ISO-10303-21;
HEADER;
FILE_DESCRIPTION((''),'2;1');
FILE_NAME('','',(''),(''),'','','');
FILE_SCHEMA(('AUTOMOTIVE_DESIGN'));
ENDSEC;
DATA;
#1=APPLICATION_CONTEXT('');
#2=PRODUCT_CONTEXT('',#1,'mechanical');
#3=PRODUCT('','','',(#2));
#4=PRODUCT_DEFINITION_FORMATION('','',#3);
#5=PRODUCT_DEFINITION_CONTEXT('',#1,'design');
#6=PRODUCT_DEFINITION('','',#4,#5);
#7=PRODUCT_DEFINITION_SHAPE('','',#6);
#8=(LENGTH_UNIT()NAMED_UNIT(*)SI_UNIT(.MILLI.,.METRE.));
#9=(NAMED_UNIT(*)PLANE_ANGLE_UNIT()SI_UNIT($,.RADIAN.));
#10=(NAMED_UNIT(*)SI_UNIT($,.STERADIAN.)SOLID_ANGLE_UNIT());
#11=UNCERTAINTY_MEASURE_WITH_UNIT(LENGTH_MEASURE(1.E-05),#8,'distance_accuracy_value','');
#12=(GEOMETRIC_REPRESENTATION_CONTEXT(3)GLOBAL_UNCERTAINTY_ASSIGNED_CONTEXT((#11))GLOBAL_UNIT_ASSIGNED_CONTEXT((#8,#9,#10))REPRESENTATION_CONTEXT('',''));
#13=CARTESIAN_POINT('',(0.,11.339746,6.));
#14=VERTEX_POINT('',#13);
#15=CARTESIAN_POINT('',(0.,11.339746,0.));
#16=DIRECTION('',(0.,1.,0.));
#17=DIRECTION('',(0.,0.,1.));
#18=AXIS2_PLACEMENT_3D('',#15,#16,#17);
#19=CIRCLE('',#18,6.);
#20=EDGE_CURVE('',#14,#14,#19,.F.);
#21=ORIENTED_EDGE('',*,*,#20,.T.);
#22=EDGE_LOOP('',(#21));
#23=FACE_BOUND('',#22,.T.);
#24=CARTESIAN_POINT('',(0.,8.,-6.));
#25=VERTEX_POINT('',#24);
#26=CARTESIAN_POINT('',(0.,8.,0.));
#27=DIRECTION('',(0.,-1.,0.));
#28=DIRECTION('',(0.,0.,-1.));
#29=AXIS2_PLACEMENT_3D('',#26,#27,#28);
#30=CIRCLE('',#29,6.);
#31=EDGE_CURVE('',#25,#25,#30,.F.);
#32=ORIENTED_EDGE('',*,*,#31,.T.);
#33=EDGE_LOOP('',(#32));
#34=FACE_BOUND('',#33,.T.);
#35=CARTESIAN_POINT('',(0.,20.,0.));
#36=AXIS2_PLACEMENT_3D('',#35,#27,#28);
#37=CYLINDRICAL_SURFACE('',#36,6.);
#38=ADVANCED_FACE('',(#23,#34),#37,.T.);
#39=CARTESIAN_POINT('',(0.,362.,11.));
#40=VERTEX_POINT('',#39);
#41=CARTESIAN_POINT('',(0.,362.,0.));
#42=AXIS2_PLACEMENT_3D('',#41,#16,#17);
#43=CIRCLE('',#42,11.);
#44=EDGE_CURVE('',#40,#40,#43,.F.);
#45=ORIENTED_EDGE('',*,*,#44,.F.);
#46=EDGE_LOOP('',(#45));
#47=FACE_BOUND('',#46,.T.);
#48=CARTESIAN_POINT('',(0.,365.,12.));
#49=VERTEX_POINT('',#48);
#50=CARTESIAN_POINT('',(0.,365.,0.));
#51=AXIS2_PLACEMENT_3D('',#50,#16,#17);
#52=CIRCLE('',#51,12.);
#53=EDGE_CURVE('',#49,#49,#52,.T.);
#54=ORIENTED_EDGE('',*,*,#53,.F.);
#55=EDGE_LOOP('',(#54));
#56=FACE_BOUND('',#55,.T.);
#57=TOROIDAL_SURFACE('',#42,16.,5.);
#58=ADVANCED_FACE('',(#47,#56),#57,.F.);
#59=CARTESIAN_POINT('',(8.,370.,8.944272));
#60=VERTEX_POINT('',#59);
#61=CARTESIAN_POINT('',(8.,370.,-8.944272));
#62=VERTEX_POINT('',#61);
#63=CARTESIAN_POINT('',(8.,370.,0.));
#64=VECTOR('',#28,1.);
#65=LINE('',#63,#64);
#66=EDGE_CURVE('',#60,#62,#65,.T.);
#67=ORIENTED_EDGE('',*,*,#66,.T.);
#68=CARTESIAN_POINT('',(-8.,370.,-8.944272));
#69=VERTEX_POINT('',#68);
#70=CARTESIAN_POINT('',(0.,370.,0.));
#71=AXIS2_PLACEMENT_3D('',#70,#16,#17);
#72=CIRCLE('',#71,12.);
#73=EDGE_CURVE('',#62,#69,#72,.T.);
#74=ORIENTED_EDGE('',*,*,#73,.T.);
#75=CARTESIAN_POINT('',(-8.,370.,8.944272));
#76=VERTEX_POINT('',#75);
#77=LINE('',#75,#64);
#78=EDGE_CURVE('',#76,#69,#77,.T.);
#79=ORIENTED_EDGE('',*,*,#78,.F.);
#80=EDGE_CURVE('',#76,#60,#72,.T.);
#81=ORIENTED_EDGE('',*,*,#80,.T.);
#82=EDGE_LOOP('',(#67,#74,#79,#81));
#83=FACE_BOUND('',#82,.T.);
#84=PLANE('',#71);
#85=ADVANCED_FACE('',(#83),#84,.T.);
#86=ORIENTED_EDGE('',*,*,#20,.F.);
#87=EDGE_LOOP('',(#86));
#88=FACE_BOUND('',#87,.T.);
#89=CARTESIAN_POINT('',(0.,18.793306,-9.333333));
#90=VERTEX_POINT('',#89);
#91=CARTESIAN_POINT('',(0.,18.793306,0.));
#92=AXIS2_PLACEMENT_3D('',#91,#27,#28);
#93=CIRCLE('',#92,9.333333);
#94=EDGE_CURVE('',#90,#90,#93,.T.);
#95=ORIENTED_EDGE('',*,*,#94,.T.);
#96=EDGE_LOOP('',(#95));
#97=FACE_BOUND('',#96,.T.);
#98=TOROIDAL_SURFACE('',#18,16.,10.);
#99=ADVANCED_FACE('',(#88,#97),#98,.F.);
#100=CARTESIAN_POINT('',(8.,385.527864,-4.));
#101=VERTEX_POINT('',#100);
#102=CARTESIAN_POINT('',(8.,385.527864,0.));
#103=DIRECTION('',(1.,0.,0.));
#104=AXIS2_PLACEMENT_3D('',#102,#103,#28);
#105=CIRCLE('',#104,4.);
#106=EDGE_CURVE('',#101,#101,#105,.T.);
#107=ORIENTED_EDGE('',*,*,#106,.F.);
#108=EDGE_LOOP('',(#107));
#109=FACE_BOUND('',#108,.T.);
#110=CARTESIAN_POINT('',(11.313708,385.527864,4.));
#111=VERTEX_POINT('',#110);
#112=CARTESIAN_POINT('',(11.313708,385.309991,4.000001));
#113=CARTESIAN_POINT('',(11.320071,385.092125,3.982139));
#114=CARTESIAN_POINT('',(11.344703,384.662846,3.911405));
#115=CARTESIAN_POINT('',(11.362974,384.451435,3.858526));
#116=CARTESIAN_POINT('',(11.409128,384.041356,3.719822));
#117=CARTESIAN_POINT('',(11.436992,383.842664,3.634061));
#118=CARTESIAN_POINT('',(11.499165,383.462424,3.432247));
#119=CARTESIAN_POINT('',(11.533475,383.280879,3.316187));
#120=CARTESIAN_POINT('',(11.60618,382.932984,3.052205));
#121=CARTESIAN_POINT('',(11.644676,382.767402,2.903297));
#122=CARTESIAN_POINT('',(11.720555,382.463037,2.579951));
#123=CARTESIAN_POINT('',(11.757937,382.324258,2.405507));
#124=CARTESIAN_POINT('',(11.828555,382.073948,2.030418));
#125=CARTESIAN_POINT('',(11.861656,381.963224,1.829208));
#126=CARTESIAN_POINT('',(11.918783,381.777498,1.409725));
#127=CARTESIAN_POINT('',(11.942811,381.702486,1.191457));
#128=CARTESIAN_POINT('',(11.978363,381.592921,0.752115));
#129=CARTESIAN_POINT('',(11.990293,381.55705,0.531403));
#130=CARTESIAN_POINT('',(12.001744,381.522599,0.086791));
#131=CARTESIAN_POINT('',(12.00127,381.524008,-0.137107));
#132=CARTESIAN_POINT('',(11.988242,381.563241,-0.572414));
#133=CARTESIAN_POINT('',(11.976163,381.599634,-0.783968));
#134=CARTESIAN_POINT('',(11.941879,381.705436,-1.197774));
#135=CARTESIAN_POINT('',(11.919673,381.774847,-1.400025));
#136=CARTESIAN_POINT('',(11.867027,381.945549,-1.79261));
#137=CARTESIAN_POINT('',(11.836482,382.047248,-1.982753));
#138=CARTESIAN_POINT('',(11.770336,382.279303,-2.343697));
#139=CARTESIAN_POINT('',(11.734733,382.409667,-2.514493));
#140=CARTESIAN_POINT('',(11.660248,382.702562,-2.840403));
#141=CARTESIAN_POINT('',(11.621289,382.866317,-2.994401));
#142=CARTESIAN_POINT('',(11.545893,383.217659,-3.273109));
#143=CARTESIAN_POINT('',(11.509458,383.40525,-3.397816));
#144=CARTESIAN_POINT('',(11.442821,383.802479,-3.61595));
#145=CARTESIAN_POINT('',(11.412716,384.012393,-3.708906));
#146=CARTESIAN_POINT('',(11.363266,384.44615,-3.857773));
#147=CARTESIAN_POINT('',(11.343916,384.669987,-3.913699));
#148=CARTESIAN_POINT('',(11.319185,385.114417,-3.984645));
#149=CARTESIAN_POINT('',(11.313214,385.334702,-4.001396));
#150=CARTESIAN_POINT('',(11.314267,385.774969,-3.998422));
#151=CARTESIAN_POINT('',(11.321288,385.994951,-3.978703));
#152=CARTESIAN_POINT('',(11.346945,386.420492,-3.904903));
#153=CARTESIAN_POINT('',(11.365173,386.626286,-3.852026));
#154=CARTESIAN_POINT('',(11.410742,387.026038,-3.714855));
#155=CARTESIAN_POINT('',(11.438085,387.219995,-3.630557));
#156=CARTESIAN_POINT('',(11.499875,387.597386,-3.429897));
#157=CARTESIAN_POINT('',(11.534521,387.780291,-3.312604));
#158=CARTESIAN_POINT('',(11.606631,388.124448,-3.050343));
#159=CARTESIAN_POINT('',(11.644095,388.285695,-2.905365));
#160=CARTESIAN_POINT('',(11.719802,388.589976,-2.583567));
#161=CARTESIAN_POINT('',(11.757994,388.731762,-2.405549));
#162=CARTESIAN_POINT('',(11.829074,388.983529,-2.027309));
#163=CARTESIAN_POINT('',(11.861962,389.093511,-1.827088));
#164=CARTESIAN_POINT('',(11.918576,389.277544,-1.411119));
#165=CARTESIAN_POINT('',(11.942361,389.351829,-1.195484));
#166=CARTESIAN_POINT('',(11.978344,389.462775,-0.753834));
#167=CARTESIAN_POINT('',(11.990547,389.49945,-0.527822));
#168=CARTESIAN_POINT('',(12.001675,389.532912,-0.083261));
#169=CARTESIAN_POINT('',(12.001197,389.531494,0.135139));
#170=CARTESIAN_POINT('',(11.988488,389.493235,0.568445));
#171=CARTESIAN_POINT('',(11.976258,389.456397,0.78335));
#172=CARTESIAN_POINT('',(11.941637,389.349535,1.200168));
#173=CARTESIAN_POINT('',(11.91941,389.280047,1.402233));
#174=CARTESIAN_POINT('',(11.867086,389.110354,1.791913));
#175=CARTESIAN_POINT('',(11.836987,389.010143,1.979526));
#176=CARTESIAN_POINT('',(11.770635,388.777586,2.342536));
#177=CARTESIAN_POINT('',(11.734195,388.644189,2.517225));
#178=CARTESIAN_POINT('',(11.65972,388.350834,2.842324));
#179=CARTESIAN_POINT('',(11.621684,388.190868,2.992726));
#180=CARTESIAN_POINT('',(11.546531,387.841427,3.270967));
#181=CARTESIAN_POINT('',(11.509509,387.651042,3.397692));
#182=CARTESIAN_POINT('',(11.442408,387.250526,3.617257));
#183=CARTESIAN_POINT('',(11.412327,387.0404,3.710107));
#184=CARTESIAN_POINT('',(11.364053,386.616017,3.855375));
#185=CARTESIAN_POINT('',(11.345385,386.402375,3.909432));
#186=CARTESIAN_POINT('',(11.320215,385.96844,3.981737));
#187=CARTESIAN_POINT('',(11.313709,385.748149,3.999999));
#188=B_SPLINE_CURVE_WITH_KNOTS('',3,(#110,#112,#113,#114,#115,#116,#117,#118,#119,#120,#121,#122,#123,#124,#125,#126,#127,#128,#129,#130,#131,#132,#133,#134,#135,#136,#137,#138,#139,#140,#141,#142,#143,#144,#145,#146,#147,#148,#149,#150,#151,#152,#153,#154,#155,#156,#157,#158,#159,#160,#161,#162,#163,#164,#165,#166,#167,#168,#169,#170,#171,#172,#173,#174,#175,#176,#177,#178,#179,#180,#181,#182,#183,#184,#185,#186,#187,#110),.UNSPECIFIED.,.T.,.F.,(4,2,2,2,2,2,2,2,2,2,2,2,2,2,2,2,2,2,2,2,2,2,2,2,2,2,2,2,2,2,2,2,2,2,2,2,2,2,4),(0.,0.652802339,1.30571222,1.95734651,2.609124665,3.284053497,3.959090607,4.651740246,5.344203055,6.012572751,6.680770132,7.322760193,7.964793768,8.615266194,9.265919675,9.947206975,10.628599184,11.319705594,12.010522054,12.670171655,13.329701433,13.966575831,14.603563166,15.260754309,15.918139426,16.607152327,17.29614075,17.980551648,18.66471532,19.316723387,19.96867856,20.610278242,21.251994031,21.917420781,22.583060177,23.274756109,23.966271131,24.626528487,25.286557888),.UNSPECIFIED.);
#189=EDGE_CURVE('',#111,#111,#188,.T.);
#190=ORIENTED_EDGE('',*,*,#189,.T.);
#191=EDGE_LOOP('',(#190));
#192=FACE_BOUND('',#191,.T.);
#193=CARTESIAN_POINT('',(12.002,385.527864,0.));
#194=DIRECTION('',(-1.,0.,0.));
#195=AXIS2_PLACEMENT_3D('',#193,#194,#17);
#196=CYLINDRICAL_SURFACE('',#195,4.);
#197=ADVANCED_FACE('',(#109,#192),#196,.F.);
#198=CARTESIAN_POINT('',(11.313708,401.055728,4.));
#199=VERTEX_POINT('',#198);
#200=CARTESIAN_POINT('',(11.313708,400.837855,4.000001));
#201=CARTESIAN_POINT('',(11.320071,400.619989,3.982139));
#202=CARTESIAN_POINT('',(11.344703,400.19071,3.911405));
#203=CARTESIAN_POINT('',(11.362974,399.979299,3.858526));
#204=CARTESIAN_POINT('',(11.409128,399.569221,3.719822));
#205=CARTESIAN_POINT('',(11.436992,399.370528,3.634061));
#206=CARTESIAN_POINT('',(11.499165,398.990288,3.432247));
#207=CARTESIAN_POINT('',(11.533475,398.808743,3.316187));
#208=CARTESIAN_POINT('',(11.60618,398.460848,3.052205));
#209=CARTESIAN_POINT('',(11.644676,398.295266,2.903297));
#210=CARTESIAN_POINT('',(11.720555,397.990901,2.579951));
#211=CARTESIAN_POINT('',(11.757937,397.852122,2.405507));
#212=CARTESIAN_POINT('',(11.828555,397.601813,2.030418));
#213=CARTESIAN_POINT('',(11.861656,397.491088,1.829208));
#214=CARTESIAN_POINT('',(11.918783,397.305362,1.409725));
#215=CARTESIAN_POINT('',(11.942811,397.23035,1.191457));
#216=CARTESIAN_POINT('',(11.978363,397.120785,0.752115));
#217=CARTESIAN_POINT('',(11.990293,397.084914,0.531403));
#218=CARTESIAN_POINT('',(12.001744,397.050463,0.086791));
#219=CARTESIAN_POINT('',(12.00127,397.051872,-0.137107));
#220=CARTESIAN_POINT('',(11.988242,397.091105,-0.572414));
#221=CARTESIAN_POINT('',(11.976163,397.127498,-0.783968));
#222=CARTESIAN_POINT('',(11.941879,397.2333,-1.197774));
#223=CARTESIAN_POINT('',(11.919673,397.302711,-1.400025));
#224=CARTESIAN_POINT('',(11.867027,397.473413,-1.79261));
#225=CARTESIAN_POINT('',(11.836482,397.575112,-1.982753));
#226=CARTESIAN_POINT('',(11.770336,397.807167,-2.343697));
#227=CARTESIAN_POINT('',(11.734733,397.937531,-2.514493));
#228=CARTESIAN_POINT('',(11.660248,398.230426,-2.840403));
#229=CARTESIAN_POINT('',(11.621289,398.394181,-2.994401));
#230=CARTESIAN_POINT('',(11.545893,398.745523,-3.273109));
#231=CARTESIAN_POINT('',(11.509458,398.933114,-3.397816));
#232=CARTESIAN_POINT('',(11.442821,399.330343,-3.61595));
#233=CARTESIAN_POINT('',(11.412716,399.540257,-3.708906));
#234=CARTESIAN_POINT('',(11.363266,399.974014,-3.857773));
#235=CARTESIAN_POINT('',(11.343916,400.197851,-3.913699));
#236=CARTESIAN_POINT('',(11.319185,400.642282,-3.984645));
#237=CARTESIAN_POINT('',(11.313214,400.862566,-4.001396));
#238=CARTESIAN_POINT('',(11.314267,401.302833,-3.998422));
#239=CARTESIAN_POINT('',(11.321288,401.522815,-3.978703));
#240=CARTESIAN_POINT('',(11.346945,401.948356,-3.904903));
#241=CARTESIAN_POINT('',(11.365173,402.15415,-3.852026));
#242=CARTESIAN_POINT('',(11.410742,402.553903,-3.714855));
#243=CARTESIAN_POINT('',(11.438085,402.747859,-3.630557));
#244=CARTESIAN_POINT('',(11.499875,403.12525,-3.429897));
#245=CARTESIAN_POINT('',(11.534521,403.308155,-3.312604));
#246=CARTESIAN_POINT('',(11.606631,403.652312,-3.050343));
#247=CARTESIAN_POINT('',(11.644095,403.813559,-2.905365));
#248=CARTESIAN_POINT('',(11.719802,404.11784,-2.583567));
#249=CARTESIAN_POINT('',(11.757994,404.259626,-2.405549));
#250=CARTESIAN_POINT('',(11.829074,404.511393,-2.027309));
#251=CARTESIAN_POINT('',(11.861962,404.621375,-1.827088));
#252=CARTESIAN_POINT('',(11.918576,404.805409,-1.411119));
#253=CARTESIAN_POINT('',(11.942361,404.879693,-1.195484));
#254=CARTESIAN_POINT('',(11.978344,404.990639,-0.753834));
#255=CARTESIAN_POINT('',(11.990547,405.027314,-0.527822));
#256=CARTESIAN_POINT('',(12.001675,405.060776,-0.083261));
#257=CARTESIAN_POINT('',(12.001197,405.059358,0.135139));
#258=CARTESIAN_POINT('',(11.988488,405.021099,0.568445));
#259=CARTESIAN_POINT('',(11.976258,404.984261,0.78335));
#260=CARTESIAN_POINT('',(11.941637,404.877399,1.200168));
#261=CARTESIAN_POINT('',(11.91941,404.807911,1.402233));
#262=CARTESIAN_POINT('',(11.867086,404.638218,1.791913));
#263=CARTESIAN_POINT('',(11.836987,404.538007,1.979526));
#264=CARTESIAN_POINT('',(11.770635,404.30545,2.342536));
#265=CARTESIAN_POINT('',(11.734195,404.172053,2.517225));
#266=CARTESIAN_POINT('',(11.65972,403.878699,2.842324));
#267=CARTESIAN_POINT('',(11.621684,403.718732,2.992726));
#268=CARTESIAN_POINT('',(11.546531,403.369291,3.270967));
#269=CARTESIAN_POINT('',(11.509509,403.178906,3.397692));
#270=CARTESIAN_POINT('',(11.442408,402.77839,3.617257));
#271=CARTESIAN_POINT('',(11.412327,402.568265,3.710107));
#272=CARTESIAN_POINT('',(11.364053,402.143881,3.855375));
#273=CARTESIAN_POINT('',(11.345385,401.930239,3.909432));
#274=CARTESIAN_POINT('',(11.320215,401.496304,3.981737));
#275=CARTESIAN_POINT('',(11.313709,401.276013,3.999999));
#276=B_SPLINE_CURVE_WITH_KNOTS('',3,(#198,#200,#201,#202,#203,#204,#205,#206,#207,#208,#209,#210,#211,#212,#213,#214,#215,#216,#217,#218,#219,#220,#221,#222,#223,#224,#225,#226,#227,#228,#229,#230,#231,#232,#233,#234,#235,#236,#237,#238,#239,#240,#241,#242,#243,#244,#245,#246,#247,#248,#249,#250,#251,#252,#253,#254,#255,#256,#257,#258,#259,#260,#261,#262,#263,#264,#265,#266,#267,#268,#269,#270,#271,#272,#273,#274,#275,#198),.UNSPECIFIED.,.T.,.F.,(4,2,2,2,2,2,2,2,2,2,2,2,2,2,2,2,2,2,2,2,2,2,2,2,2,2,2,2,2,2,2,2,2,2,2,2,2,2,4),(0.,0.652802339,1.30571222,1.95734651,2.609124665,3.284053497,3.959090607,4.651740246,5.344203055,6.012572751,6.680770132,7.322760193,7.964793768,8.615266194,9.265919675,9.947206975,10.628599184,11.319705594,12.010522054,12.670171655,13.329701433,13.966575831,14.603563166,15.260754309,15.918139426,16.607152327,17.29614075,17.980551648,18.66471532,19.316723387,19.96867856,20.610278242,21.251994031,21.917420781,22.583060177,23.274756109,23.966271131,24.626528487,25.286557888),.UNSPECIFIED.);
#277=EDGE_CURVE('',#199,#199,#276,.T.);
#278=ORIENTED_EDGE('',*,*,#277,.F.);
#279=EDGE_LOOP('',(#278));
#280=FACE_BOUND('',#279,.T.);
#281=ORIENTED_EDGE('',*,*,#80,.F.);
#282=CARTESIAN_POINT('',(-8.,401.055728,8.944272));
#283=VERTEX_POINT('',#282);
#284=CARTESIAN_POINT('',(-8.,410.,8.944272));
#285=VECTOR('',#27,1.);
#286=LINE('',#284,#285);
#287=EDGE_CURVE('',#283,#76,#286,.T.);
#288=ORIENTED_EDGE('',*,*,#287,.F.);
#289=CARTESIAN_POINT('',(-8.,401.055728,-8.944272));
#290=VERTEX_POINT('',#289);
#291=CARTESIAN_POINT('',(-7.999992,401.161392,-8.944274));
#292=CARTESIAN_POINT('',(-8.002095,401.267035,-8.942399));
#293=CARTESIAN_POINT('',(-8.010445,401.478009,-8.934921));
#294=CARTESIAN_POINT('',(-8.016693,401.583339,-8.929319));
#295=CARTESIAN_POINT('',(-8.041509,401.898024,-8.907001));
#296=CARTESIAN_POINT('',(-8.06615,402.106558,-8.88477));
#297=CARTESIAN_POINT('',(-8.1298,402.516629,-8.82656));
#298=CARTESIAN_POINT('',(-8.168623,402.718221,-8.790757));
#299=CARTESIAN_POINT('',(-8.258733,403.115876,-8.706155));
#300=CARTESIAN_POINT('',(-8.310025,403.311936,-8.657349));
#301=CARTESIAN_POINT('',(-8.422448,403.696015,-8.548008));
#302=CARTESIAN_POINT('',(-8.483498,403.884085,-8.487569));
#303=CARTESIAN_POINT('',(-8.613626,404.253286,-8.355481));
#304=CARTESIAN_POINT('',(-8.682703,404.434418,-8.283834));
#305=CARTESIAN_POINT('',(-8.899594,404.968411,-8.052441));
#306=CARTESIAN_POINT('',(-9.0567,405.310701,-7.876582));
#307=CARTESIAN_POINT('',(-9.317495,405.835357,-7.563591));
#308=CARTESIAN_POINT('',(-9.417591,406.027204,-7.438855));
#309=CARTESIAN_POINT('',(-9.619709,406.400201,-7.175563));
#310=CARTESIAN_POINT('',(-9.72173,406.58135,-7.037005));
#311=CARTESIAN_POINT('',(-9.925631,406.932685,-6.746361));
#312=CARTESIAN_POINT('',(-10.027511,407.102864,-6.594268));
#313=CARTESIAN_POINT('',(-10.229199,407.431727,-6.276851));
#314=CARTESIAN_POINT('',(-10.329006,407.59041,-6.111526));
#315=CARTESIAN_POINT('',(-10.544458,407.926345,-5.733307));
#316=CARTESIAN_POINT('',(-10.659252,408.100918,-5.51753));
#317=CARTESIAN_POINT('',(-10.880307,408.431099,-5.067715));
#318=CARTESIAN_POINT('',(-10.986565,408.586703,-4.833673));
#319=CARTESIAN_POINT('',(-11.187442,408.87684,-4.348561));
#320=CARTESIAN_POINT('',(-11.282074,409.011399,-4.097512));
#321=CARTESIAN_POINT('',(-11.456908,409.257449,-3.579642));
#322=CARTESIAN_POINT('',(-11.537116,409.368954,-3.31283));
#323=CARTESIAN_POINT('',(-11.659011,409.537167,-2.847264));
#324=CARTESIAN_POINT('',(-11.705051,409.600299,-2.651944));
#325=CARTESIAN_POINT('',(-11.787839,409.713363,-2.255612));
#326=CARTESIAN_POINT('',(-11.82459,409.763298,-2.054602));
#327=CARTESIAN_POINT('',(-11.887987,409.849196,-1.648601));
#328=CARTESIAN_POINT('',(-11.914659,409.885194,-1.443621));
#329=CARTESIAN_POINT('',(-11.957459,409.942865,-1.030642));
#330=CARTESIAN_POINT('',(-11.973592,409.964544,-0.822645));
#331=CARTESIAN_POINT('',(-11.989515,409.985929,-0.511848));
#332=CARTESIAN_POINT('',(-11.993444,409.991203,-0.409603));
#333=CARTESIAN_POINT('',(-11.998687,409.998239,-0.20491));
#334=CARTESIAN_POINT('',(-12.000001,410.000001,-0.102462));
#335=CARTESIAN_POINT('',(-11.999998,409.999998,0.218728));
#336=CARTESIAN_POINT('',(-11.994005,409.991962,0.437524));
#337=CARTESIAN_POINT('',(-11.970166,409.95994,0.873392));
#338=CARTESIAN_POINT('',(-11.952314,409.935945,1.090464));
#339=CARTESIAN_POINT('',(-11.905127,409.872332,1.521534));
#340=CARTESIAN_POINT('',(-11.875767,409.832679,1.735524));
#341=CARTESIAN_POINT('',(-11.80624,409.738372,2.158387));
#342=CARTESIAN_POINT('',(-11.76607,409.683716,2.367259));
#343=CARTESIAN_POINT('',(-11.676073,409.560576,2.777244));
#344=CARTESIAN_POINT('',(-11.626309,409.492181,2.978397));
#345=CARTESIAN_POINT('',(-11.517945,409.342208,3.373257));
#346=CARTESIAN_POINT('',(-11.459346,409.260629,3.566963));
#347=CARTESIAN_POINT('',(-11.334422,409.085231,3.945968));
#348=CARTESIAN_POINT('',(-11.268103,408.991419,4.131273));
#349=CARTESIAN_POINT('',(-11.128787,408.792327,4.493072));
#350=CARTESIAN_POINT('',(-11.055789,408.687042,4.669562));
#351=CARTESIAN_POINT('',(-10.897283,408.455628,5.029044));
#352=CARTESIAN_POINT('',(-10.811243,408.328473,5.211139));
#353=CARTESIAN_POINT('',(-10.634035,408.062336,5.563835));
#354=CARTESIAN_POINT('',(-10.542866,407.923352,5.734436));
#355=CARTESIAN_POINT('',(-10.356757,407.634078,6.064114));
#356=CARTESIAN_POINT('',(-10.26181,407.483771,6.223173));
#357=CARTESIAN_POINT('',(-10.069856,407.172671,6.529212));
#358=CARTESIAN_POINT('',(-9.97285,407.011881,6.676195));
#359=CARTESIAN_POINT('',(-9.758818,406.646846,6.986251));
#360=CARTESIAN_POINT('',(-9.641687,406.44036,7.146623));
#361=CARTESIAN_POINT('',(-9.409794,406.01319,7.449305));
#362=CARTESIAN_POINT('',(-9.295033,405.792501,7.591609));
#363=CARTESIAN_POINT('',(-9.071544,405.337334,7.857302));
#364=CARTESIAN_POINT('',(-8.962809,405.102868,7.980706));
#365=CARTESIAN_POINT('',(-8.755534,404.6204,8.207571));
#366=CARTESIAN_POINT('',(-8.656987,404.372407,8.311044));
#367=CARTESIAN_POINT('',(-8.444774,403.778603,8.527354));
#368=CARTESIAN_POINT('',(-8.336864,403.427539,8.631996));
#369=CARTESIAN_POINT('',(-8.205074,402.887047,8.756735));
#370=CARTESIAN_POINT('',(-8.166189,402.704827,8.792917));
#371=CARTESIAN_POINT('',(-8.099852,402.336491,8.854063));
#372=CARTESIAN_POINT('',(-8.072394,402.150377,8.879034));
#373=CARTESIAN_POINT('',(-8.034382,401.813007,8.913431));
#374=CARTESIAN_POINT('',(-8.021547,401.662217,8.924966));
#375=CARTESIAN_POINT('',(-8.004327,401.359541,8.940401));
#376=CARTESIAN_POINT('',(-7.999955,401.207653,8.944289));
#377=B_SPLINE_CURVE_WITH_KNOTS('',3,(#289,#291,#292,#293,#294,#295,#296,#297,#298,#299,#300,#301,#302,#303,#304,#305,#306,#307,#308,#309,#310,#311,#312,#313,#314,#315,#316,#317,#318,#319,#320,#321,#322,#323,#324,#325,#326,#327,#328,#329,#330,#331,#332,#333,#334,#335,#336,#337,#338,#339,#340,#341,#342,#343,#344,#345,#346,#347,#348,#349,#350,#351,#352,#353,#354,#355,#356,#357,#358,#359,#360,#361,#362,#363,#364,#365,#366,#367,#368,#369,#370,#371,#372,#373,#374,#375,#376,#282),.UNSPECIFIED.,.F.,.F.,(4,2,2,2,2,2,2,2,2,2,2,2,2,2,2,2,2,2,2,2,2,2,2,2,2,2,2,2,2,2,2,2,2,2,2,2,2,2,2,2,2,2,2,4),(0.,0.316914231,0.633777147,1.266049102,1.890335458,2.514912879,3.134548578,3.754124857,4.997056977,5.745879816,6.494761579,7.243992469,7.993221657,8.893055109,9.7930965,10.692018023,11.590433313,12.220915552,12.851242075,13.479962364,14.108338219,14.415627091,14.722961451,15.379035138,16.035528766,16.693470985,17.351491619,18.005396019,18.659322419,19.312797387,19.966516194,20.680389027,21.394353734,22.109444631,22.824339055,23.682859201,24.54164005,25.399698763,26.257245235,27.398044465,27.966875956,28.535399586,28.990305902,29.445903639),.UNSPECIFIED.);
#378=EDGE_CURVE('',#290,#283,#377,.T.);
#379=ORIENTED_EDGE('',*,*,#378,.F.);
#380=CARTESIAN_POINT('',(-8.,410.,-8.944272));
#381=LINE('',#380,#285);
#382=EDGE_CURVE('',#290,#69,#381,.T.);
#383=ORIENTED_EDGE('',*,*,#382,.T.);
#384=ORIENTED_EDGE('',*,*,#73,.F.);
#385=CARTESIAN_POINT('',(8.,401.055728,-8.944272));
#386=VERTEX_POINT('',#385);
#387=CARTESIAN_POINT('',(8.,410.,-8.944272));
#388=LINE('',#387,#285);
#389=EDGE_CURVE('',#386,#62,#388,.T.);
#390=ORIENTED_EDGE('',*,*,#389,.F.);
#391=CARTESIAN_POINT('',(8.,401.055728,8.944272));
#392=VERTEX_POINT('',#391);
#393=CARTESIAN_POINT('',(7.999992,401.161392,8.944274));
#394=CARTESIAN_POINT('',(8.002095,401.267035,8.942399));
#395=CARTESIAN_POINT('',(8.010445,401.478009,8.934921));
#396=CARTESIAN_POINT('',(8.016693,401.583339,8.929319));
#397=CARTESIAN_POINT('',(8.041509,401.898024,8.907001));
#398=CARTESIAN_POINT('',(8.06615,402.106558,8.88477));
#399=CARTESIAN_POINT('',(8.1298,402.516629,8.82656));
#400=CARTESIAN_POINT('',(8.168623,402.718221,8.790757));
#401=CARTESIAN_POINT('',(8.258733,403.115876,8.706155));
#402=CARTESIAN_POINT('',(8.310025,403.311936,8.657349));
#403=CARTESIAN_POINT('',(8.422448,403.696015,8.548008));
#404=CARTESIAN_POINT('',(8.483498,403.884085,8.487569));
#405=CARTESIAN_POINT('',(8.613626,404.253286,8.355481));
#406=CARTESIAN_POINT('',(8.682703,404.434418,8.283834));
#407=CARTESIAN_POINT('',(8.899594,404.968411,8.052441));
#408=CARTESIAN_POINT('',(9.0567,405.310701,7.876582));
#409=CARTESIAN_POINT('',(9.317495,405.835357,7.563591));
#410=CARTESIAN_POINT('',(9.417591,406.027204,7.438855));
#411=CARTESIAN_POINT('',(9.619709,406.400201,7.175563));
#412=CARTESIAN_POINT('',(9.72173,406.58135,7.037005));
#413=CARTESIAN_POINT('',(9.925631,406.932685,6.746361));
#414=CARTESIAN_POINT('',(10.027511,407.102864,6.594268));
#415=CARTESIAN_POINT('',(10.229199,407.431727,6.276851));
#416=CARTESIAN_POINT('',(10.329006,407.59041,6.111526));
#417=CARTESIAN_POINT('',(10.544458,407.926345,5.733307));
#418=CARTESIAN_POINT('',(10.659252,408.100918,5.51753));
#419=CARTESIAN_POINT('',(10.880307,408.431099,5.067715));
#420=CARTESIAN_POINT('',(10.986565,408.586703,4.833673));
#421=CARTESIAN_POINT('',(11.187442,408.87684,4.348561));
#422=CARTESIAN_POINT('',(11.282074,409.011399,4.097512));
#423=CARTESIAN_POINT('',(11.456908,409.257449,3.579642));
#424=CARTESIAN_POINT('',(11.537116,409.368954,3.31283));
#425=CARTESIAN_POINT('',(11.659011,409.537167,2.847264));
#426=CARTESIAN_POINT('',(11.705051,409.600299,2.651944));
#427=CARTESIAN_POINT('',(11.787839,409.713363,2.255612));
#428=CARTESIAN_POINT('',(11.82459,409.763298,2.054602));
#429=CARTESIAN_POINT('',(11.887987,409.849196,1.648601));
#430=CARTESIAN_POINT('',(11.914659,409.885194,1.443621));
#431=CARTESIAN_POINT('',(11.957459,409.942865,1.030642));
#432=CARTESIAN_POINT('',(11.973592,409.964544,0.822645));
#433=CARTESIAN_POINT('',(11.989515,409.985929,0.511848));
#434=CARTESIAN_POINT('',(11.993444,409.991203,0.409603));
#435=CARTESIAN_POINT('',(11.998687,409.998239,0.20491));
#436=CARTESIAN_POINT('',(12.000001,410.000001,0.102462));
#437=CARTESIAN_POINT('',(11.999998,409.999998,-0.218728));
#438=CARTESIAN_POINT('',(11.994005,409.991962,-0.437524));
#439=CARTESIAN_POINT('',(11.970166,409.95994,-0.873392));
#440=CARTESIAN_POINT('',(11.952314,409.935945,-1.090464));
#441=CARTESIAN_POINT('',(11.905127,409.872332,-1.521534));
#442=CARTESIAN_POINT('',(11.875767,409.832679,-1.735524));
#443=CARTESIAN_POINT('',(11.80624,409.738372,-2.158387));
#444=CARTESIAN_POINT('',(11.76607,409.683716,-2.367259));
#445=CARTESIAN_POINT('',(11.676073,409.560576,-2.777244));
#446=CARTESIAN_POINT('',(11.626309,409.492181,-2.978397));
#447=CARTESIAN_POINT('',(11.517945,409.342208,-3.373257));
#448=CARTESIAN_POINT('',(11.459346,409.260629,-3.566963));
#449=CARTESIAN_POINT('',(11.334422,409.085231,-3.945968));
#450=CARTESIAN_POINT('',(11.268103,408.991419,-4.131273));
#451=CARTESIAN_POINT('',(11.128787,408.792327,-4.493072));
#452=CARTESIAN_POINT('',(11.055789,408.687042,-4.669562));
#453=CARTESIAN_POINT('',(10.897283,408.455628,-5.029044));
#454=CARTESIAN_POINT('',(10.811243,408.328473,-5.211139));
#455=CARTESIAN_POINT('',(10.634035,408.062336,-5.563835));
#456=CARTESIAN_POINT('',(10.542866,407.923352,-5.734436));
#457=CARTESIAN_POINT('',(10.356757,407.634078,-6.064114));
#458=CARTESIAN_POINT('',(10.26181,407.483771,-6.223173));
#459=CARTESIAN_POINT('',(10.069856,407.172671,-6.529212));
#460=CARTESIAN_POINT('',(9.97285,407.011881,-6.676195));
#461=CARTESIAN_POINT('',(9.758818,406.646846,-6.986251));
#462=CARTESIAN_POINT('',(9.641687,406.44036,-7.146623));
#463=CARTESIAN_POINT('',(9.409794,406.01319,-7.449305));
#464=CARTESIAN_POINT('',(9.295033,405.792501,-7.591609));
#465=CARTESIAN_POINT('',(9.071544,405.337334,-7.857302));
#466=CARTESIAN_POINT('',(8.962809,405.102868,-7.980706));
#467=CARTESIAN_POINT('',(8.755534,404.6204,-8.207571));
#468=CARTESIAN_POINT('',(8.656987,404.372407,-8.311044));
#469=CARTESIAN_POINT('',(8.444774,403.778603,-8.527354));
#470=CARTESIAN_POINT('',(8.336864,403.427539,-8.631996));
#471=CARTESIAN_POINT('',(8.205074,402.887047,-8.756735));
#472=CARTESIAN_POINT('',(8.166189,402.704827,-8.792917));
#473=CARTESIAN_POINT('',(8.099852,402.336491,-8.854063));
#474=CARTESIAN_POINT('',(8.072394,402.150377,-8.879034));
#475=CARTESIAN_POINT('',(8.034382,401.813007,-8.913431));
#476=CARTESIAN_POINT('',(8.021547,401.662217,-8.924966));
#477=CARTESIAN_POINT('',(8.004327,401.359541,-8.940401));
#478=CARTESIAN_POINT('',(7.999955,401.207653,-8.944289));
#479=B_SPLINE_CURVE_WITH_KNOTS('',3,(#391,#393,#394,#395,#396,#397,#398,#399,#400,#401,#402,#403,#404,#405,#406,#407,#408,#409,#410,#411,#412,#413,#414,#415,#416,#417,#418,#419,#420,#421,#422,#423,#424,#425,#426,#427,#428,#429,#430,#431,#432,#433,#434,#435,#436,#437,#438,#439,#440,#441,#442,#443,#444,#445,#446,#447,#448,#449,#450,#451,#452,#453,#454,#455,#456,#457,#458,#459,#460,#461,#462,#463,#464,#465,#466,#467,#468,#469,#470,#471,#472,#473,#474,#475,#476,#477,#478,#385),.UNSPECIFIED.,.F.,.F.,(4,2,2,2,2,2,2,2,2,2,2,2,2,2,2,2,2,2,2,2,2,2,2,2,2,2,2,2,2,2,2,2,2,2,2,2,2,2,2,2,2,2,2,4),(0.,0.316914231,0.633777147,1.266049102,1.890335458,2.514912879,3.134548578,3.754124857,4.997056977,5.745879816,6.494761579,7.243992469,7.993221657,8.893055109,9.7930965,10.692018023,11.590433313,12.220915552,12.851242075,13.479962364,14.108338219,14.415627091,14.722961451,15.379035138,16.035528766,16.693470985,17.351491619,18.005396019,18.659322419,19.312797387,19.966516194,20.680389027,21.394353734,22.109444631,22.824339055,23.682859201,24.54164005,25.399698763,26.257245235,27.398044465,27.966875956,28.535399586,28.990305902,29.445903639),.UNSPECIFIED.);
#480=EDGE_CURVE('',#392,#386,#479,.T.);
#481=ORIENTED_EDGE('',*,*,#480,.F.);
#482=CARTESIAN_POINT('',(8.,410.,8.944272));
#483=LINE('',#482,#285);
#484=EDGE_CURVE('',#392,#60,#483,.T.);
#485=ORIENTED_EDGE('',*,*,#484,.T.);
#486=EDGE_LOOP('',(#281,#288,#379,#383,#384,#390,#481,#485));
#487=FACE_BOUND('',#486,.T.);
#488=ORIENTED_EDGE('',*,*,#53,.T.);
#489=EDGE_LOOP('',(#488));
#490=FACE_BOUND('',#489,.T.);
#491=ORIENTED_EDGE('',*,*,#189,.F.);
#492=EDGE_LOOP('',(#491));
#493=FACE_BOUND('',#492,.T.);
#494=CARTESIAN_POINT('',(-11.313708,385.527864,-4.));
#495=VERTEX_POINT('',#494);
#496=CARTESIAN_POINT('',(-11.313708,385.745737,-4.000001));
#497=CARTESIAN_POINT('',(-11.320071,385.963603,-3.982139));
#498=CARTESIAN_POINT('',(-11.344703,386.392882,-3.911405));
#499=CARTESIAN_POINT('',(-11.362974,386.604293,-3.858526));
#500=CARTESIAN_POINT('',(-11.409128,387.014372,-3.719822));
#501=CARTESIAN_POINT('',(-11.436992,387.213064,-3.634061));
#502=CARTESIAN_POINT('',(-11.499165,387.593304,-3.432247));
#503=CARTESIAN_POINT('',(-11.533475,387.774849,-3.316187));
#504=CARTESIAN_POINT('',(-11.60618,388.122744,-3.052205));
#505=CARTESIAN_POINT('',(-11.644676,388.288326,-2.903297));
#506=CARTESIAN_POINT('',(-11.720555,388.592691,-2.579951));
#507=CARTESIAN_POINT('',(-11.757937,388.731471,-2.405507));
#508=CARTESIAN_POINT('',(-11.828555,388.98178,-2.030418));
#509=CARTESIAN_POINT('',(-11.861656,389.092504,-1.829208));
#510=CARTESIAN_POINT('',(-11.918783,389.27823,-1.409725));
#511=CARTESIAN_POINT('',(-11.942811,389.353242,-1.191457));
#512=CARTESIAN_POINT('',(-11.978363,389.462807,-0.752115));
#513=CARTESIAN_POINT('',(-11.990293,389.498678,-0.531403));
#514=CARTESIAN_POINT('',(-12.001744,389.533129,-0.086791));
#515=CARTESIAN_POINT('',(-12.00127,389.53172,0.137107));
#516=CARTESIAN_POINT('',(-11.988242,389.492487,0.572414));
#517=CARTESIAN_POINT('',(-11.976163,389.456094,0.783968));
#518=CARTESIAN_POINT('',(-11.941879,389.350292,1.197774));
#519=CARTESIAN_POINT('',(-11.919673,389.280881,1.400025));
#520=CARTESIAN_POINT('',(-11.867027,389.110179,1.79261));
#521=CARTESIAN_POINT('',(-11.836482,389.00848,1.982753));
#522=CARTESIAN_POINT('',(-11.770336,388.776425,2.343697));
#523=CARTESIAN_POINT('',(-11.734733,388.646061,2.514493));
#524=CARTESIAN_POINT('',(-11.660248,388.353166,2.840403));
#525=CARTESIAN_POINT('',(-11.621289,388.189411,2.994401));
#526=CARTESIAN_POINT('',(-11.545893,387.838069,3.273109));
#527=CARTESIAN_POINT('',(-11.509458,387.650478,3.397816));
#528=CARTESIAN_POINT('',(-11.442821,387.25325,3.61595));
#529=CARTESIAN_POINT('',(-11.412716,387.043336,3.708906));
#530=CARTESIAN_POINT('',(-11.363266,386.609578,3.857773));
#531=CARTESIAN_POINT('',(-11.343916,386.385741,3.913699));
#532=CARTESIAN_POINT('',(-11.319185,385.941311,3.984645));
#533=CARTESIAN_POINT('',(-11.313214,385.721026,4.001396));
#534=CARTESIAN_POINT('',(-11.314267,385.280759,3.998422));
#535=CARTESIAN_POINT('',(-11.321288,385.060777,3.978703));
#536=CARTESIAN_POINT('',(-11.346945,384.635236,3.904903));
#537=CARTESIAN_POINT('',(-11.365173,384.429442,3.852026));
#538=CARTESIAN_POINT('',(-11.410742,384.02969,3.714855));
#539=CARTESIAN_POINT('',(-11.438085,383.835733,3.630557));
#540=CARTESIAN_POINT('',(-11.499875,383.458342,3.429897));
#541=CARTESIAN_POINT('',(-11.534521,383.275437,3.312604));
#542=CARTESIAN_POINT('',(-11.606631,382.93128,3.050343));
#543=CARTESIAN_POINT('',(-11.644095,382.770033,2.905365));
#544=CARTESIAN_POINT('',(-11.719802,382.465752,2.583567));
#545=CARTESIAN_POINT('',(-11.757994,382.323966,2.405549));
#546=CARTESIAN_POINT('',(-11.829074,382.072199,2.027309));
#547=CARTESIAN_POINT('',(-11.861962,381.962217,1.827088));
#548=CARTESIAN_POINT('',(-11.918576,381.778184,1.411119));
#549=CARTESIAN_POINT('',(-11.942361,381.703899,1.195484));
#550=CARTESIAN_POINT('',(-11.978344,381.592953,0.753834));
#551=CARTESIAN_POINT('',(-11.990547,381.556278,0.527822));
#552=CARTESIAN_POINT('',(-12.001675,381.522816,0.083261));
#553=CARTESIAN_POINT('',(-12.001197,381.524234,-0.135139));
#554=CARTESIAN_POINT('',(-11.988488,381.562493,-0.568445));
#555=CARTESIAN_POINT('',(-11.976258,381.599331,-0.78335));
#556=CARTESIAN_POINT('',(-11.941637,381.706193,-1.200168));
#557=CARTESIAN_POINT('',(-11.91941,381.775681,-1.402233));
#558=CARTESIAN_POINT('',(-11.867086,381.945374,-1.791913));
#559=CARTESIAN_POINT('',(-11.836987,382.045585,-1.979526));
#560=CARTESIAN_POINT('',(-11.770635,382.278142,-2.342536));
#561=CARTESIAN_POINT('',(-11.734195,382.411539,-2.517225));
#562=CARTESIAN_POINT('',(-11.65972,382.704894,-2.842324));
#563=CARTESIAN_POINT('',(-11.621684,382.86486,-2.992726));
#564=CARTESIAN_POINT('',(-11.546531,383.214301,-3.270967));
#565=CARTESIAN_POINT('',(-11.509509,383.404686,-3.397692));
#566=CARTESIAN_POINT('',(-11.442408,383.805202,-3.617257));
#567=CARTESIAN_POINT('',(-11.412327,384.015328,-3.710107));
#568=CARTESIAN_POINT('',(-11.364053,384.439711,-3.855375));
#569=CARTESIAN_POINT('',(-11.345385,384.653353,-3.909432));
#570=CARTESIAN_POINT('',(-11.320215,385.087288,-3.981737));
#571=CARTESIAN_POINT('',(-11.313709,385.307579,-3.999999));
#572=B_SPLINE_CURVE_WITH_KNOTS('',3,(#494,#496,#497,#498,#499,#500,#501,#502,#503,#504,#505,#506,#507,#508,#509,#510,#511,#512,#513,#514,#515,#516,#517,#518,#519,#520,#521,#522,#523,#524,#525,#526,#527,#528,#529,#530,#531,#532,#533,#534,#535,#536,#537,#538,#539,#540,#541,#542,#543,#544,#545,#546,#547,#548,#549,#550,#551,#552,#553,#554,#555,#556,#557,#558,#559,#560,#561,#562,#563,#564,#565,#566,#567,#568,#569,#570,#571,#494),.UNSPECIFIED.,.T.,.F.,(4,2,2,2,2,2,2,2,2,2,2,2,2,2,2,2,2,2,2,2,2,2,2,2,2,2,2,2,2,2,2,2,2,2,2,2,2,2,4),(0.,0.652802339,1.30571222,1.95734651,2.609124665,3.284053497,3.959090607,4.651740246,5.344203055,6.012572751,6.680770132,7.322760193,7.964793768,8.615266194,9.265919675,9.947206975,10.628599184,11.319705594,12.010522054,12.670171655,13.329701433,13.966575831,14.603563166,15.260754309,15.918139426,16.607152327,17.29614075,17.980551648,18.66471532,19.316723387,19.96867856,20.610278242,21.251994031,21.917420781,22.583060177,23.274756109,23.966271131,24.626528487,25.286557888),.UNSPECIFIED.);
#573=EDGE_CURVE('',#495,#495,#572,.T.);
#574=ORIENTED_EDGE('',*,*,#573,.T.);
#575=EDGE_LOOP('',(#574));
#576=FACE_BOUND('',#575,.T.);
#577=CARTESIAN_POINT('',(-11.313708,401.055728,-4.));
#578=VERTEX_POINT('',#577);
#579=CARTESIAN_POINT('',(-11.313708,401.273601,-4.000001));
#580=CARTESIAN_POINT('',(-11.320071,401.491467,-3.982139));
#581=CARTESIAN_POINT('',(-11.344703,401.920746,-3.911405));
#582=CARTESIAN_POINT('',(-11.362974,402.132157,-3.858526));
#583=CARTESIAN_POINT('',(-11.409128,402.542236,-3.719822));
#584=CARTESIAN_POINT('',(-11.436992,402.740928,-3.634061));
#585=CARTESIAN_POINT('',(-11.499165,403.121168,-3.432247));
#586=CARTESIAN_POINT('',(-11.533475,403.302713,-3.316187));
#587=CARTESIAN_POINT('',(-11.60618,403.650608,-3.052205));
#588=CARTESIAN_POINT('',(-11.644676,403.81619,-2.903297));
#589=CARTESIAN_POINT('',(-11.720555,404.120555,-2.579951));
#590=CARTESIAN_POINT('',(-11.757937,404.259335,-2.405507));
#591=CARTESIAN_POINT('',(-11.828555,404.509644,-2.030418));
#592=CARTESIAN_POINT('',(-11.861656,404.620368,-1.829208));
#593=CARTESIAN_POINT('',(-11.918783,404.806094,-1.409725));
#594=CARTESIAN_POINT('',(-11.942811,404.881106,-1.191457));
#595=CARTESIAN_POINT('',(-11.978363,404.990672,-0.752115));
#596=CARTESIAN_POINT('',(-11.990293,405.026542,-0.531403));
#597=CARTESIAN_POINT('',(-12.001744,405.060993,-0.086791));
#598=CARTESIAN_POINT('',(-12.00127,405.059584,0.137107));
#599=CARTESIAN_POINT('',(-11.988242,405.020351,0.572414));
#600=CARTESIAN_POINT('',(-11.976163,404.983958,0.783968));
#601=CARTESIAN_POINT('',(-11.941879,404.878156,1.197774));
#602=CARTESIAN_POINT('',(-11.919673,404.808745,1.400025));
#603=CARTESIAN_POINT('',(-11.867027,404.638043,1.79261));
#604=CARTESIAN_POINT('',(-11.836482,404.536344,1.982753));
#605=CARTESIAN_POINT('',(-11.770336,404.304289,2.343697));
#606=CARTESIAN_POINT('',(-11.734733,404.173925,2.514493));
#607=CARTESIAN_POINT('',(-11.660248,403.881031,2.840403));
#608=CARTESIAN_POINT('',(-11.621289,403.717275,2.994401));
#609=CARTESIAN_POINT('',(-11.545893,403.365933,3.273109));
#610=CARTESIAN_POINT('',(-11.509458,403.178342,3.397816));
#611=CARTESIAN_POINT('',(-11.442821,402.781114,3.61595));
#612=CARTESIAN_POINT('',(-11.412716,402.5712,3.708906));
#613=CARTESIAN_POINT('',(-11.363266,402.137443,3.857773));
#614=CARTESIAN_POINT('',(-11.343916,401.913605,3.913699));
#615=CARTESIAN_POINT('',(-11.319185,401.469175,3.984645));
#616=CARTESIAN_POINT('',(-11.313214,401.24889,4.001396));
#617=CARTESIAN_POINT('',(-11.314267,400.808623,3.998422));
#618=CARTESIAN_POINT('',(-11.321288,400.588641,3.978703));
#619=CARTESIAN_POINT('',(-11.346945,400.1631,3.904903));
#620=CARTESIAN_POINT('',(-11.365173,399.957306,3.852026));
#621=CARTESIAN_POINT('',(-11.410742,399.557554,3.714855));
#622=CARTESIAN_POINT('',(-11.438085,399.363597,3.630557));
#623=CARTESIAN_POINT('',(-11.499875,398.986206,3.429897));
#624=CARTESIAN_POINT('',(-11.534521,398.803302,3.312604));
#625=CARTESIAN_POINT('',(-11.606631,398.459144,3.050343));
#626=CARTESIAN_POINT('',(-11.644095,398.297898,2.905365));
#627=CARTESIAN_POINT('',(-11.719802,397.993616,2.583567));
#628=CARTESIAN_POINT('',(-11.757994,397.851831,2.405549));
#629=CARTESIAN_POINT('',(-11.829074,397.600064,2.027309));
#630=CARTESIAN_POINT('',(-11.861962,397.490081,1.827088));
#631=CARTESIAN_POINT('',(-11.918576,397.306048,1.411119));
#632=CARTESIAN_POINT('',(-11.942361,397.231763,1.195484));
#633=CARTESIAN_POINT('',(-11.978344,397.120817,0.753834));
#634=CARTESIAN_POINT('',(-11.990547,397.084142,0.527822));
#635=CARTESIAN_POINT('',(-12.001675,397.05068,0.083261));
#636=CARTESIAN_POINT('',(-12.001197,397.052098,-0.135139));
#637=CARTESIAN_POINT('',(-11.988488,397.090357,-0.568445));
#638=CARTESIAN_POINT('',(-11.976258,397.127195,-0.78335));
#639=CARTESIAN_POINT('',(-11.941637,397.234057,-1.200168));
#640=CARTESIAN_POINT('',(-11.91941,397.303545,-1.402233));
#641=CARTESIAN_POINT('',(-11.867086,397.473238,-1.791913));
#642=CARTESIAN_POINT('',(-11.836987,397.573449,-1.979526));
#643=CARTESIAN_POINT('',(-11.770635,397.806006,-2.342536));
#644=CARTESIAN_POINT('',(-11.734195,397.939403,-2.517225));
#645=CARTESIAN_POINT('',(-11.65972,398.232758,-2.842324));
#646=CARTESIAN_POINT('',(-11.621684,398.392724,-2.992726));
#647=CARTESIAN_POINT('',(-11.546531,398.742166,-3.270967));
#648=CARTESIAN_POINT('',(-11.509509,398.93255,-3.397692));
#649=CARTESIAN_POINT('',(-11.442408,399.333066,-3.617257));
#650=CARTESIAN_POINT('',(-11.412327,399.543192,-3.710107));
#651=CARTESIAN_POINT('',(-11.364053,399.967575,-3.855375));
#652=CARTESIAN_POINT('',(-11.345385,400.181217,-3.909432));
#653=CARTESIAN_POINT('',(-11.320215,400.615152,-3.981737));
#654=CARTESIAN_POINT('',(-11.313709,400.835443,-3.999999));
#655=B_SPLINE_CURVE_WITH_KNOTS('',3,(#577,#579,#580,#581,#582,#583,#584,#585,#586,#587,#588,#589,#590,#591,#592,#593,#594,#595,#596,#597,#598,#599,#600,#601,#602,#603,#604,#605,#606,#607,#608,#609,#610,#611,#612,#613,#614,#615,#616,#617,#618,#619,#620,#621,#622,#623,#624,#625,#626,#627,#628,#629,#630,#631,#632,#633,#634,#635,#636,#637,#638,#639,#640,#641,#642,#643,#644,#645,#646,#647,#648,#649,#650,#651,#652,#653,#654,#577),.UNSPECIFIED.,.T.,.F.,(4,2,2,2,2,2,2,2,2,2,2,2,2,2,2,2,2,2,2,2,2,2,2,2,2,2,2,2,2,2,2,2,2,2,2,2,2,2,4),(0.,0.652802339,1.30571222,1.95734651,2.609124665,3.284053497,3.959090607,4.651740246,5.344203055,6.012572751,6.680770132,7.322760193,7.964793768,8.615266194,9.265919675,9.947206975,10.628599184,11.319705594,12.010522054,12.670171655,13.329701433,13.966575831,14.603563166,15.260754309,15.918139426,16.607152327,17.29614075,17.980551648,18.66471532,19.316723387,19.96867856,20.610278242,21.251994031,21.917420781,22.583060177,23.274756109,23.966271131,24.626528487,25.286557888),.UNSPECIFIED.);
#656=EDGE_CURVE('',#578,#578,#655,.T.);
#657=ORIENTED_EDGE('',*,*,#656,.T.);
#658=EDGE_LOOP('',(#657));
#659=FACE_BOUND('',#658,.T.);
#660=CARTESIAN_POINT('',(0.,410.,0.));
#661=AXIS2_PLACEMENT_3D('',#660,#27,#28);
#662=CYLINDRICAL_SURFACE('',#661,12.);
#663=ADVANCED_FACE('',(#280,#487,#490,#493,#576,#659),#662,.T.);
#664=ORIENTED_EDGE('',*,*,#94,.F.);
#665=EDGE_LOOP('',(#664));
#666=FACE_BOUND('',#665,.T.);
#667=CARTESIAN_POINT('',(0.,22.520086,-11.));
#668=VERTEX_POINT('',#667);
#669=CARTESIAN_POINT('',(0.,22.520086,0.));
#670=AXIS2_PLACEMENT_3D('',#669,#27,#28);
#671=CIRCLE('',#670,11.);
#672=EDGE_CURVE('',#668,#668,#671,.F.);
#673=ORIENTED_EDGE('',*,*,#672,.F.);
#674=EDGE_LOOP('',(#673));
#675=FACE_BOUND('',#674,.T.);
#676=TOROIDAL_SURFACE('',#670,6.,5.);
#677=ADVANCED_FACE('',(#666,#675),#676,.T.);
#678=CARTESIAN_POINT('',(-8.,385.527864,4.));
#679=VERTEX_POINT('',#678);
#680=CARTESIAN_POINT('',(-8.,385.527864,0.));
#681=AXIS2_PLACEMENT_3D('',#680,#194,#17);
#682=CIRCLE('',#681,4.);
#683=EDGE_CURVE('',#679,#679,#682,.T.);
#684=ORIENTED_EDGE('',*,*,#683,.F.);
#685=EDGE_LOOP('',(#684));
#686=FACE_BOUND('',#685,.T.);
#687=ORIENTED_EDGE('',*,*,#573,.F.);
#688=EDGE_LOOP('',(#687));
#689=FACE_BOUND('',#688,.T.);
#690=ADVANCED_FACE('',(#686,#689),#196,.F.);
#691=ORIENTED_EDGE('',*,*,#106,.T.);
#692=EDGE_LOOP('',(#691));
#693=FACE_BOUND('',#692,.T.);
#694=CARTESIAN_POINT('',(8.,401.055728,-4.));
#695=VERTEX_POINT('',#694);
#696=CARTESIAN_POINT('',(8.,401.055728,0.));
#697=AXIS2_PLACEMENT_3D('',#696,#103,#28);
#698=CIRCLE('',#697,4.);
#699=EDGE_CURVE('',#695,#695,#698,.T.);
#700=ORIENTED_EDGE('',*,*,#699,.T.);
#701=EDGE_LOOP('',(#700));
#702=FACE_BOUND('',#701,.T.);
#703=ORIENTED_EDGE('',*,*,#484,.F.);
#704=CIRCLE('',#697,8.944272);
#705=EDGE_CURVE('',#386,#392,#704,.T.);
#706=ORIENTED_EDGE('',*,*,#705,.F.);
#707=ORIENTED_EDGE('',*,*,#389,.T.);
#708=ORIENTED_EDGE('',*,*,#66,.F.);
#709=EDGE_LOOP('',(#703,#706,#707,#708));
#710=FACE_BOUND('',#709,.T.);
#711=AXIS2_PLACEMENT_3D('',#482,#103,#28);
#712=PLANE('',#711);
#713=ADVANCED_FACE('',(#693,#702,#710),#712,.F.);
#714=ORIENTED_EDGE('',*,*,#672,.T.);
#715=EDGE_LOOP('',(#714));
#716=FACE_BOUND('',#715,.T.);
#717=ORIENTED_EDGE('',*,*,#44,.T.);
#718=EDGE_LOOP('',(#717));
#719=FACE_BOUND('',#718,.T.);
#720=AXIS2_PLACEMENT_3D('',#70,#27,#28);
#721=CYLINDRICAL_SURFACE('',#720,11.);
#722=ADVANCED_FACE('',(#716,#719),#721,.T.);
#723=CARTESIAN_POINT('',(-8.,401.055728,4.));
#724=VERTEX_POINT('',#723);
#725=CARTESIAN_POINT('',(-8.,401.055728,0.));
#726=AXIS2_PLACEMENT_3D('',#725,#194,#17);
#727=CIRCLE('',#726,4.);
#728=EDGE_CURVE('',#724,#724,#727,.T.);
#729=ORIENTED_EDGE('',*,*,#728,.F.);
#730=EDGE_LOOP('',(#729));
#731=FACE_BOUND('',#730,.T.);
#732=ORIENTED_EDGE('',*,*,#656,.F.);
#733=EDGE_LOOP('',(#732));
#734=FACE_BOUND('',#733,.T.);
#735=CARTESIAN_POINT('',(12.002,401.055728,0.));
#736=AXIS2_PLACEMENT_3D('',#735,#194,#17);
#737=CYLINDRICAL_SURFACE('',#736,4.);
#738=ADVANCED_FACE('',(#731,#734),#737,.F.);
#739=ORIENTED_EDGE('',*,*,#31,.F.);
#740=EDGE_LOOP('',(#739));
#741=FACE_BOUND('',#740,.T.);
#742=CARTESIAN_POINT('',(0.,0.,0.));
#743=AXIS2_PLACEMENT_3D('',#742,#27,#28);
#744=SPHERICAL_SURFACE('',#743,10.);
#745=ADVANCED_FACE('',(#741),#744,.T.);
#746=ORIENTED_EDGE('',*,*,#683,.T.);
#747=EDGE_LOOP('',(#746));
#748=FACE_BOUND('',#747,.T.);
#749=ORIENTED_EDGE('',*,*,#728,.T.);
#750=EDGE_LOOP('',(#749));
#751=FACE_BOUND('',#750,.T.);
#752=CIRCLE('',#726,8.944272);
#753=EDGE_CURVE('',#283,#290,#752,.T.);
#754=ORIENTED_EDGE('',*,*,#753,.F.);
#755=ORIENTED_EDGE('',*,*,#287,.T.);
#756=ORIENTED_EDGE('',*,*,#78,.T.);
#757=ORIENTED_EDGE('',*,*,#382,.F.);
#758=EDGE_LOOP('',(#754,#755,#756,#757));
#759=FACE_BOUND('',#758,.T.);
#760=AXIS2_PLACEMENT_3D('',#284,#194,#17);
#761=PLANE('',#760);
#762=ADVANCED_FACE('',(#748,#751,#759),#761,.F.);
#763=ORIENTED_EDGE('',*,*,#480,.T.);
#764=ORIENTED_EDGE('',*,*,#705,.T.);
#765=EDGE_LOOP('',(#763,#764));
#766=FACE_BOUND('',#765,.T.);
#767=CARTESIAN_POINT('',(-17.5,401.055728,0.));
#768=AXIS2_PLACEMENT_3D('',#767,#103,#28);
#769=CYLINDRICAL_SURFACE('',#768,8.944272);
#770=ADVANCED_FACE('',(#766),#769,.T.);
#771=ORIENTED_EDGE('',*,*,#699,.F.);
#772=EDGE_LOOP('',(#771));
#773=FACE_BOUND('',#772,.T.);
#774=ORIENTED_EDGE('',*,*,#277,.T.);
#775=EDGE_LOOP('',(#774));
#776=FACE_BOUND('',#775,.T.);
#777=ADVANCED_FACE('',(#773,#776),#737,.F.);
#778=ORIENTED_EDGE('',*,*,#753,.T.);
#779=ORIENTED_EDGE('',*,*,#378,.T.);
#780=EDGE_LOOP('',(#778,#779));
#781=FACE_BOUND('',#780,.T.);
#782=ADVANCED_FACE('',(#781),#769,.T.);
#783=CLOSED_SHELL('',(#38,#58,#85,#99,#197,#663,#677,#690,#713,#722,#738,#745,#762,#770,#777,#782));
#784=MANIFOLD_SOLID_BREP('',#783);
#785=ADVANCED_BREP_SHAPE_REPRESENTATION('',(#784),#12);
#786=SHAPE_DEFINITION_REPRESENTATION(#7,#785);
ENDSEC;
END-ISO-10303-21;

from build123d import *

# Parameters (mm, degrees)
ESBO_O2_R                         = 6
RESSALTO_EXTRUS_O1_DEPTH          = 20
ESBO_O3_R                         = 11
RESSALTO_EXTRUS_O2_DEPTH          = 350
FILETE1_R                         = 10
FILETE2_R                         = 5
RESSALTO_EXTRUS_O3_DEPTH          = 40
RESSALTO_EXTRUS_O4_START          = -5
ESBO_O7_R                         = 12
RESSALTO_EXTRUS_O4_DEPTH          = 5
FILETE3_R                         = 5
CORTE_EXTRUS_O1_DEPTH             = 17.5
CORTE_EXTRUS_O2_REACH             = 412.663
ESBO_O10_R                        = 4
CORTE_EXTRUS_O2_DIRECTION_2_REACH = 412.663


with BuildPart() as part:
    # Esboço1 → Revolução1 (revolve)
    with BuildSketch(Plane.XY):
        with BuildLine():
            Line((-10, 0), (10, 0))
            ThreePointArc((10, 0), (0, 10), (-10, 0))
        make_face()
    revolve(axis=Axis((-10, 0, 0), (1, 0, 0)))

    # Esboço2 → Ressalto-extrusão1 (add)
    with BuildSketch(Plane(origin=(0, 0, 0), x_dir=(1, 0, 0), z_dir=(0, 1, 0))):
        with Locations(Location((0, 0, 0), (0, 0, 90))):
            Circle(ESBO_O2_R)
    extrude(amount=RESSALTO_EXTRUS_O1_DEPTH)

    # Esboço3 → Ressalto-extrusão2 (add)
    with BuildSketch(Plane(origin=(0, 20, 0), x_dir=(1, 0, 0), z_dir=(0, 1, 0))):
        with Locations(Location((0, 0, 0), (0, 0, 270))):
            Circle(ESBO_O3_R)
    extrude(amount=RESSALTO_EXTRUS_O2_DEPTH)

    # Filete1
    # the kernel refuses this fillet: 10 mm, written as the material it adds along each edge
    with BuildSketch(Plane(origin=(0, 20, 0), x_dir=(0, 0, -1), z_dir=(1, 0, 0))) as filete1_piece_1:
        with BuildLine():
            CenterArc((16, -8.660254038), FILETE1_R, 120, 60)
            Line((6, -8.660254038), (5.8, -8.660254038))
            Line((5.8, -8.660254038), (5.8, 0))
            Line((5.8, 0), (6, 0.2))
            ThreePointArc((6, 0.2), (8.5, 0.2), (10.9, 0.173205081))
            Line((10.9, 0.173205081), (11, 0))
        make_face()
    revolve(axis=Axis((0, 20, 0), (0, 1, 0)))

    # Filete2
    filete2_edges = [part.edges().sort_by_distance(p)[0] for p in [
        (11, 20, 0),
    ]]
    fillet(filete2_edges, radius=FILETE2_R)

    # Esboço5 → Ressalto-extrusão3 (add)
    with BuildSketch(Plane(origin=(0, 370, 0), x_dir=(1, 0, 0), z_dir=(0, 1, 0))):
        with BuildLine():
            Line((-8, -8.94427191), (-8, 8.94427191))
            ThreePointArc((-8, 8.94427191), (-12, 0), (-8, -8.94427191))
        make_face()
        with BuildLine():
            Line((8, -8.94427191), (8, 8.94427191))
            ThreePointArc((8, 8.94427191), (12, 0), (8, -8.94427191))
        make_face()
    extrude(amount=RESSALTO_EXTRUS_O3_DEPTH)

    # Esboço7 → Ressalto-extrusão4 (add)
    with BuildSketch(Plane(origin=(0, 370, 0), x_dir=(1, 0, 0), z_dir=(0, 1, 0)).offset(RESSALTO_EXTRUS_O4_START)):
        with Locations(Location((0, 0, 0), (0, 0, 131.810314896))):
            Circle(ESBO_O7_R)
    extrude(amount=RESSALTO_EXTRUS_O4_DEPTH)

    # Filete3
    # the kernel refuses this fillet: 5 mm, written as the material it adds along each edge
    with BuildSketch(Plane(origin=(0, 365, 0), x_dir=(0, 0, 1), z_dir=(1, 0, 0))) as filete3_piece_1:
        with BuildLine():
            CenterArc((16, 3), FILETE3_R, 180, 36.869897646)
            Line((12, 0), (11.92, -0.06))
            ThreePointArc((11.92, -0.06), (11.5, -0.1), (11, -0.1))
            Line((11, -0.1), (10.9, 0))
            Line((10.9, 0), (10.9, 3))
            Line((10.9, 3), (11, 3))
        make_face()
    revolve(axis=Axis((0, 365, 0), (0, -1, 0)))

    # Esboço9 → Corte-extrusão1 (cut, symmetric)
    with BuildSketch(Plane(origin=(0, 0, 0), x_dir=(0, 0, -1), z_dir=(1, 0, 0))):
        with BuildLine():
            Line((-8.94427191, 410), (-8.94427191, 401.05572809))
            ThreePointArc((-8.94427191, 401.05572809), (-6.32455539, 407.38028334), (-1.98e-07, 410))
            Line((-1.98e-07, 410), (-8.94427191, 410))
        make_face()
        with BuildLine():
            Line((8.94427191, 410), (-1.98e-07, 410))
            ThreePointArc((-1.98e-07, 410), (6.32455525, 407.38028348), (8.94427191, 401.05572809))
            Line((8.94427191, 401.05572809), (8.94427191, 410))
        make_face()
    extrude(amount=CORTE_EXTRUS_O1_DEPTH, both=True, mode=Mode.SUBTRACT)

    # Esboço10 → Corte-extrusão2 (cut, up to next)
    with BuildSketch(Plane.ZY.offset(-8), mode=Mode.PRIVATE) as corte_extrus_o2_sk1:
        with Locations((0, 385.527864045)):
            Circle(ESBO_O10_R)
    corte_extrus_o2_tool1 = extrude(corte_extrus_o2_sk1.sketch, amount=-CORTE_EXTRUS_O2_REACH, mode=Mode.PRIVATE) & part.part
    # Esboço10 → Corte-extrusão2 (cut, up to next)
    with BuildSketch(Plane.ZY.offset(-8), mode=Mode.PRIVATE) as corte_extrus_o2_sk2:
        with Locations((0, 401.05572809)):
            Circle(ESBO_O10_R)
    corte_extrus_o2_tool2 = extrude(corte_extrus_o2_sk2.sketch, amount=-CORTE_EXTRUS_O2_REACH, mode=Mode.PRIVATE) & part.part
    add(corte_extrus_o2_tool1.solids().sort_by_distance((8, 385.527864, 0))[0], mode=Mode.SUBTRACT)
    add(corte_extrus_o2_tool2.solids().sort_by_distance((8, 401.055728, 0))[0], mode=Mode.SUBTRACT)

    # Esboço10 → Corte-extrusão2 direction 2 (cut, up to next)
    with BuildSketch(Plane.ZY.offset(-8), mode=Mode.PRIVATE) as corte_extrus_o2_direction_2_sk1:
        with Locations((0, 385.527864045)):
            Circle(ESBO_O10_R)
    corte_extrus_o2_direction_2_tool1 = extrude(corte_extrus_o2_direction_2_sk1.sketch, amount=CORTE_EXTRUS_O2_DIRECTION_2_REACH, mode=Mode.PRIVATE) & part.part
    # Esboço10 → Corte-extrusão2 direction 2 (cut, up to next)
    with BuildSketch(Plane.ZY.offset(-8), mode=Mode.PRIVATE) as corte_extrus_o2_direction_2_sk2:
        with Locations((0, 401.05572809)):
            Circle(ESBO_O10_R)
    corte_extrus_o2_direction_2_tool2 = extrude(corte_extrus_o2_direction_2_sk2.sketch, amount=CORTE_EXTRUS_O2_DIRECTION_2_REACH, mode=Mode.PRIVATE) & part.part
    add(corte_extrus_o2_direction_2_tool1.solids().sort_by_distance((8, 385.527864, 0))[0], mode=Mode.SUBTRACT)
    add(corte_extrus_o2_direction_2_tool2.solids().sort_by_distance((8, 401.055728, 0))[0], mode=Mode.SUBTRACT)


solid = part.part
